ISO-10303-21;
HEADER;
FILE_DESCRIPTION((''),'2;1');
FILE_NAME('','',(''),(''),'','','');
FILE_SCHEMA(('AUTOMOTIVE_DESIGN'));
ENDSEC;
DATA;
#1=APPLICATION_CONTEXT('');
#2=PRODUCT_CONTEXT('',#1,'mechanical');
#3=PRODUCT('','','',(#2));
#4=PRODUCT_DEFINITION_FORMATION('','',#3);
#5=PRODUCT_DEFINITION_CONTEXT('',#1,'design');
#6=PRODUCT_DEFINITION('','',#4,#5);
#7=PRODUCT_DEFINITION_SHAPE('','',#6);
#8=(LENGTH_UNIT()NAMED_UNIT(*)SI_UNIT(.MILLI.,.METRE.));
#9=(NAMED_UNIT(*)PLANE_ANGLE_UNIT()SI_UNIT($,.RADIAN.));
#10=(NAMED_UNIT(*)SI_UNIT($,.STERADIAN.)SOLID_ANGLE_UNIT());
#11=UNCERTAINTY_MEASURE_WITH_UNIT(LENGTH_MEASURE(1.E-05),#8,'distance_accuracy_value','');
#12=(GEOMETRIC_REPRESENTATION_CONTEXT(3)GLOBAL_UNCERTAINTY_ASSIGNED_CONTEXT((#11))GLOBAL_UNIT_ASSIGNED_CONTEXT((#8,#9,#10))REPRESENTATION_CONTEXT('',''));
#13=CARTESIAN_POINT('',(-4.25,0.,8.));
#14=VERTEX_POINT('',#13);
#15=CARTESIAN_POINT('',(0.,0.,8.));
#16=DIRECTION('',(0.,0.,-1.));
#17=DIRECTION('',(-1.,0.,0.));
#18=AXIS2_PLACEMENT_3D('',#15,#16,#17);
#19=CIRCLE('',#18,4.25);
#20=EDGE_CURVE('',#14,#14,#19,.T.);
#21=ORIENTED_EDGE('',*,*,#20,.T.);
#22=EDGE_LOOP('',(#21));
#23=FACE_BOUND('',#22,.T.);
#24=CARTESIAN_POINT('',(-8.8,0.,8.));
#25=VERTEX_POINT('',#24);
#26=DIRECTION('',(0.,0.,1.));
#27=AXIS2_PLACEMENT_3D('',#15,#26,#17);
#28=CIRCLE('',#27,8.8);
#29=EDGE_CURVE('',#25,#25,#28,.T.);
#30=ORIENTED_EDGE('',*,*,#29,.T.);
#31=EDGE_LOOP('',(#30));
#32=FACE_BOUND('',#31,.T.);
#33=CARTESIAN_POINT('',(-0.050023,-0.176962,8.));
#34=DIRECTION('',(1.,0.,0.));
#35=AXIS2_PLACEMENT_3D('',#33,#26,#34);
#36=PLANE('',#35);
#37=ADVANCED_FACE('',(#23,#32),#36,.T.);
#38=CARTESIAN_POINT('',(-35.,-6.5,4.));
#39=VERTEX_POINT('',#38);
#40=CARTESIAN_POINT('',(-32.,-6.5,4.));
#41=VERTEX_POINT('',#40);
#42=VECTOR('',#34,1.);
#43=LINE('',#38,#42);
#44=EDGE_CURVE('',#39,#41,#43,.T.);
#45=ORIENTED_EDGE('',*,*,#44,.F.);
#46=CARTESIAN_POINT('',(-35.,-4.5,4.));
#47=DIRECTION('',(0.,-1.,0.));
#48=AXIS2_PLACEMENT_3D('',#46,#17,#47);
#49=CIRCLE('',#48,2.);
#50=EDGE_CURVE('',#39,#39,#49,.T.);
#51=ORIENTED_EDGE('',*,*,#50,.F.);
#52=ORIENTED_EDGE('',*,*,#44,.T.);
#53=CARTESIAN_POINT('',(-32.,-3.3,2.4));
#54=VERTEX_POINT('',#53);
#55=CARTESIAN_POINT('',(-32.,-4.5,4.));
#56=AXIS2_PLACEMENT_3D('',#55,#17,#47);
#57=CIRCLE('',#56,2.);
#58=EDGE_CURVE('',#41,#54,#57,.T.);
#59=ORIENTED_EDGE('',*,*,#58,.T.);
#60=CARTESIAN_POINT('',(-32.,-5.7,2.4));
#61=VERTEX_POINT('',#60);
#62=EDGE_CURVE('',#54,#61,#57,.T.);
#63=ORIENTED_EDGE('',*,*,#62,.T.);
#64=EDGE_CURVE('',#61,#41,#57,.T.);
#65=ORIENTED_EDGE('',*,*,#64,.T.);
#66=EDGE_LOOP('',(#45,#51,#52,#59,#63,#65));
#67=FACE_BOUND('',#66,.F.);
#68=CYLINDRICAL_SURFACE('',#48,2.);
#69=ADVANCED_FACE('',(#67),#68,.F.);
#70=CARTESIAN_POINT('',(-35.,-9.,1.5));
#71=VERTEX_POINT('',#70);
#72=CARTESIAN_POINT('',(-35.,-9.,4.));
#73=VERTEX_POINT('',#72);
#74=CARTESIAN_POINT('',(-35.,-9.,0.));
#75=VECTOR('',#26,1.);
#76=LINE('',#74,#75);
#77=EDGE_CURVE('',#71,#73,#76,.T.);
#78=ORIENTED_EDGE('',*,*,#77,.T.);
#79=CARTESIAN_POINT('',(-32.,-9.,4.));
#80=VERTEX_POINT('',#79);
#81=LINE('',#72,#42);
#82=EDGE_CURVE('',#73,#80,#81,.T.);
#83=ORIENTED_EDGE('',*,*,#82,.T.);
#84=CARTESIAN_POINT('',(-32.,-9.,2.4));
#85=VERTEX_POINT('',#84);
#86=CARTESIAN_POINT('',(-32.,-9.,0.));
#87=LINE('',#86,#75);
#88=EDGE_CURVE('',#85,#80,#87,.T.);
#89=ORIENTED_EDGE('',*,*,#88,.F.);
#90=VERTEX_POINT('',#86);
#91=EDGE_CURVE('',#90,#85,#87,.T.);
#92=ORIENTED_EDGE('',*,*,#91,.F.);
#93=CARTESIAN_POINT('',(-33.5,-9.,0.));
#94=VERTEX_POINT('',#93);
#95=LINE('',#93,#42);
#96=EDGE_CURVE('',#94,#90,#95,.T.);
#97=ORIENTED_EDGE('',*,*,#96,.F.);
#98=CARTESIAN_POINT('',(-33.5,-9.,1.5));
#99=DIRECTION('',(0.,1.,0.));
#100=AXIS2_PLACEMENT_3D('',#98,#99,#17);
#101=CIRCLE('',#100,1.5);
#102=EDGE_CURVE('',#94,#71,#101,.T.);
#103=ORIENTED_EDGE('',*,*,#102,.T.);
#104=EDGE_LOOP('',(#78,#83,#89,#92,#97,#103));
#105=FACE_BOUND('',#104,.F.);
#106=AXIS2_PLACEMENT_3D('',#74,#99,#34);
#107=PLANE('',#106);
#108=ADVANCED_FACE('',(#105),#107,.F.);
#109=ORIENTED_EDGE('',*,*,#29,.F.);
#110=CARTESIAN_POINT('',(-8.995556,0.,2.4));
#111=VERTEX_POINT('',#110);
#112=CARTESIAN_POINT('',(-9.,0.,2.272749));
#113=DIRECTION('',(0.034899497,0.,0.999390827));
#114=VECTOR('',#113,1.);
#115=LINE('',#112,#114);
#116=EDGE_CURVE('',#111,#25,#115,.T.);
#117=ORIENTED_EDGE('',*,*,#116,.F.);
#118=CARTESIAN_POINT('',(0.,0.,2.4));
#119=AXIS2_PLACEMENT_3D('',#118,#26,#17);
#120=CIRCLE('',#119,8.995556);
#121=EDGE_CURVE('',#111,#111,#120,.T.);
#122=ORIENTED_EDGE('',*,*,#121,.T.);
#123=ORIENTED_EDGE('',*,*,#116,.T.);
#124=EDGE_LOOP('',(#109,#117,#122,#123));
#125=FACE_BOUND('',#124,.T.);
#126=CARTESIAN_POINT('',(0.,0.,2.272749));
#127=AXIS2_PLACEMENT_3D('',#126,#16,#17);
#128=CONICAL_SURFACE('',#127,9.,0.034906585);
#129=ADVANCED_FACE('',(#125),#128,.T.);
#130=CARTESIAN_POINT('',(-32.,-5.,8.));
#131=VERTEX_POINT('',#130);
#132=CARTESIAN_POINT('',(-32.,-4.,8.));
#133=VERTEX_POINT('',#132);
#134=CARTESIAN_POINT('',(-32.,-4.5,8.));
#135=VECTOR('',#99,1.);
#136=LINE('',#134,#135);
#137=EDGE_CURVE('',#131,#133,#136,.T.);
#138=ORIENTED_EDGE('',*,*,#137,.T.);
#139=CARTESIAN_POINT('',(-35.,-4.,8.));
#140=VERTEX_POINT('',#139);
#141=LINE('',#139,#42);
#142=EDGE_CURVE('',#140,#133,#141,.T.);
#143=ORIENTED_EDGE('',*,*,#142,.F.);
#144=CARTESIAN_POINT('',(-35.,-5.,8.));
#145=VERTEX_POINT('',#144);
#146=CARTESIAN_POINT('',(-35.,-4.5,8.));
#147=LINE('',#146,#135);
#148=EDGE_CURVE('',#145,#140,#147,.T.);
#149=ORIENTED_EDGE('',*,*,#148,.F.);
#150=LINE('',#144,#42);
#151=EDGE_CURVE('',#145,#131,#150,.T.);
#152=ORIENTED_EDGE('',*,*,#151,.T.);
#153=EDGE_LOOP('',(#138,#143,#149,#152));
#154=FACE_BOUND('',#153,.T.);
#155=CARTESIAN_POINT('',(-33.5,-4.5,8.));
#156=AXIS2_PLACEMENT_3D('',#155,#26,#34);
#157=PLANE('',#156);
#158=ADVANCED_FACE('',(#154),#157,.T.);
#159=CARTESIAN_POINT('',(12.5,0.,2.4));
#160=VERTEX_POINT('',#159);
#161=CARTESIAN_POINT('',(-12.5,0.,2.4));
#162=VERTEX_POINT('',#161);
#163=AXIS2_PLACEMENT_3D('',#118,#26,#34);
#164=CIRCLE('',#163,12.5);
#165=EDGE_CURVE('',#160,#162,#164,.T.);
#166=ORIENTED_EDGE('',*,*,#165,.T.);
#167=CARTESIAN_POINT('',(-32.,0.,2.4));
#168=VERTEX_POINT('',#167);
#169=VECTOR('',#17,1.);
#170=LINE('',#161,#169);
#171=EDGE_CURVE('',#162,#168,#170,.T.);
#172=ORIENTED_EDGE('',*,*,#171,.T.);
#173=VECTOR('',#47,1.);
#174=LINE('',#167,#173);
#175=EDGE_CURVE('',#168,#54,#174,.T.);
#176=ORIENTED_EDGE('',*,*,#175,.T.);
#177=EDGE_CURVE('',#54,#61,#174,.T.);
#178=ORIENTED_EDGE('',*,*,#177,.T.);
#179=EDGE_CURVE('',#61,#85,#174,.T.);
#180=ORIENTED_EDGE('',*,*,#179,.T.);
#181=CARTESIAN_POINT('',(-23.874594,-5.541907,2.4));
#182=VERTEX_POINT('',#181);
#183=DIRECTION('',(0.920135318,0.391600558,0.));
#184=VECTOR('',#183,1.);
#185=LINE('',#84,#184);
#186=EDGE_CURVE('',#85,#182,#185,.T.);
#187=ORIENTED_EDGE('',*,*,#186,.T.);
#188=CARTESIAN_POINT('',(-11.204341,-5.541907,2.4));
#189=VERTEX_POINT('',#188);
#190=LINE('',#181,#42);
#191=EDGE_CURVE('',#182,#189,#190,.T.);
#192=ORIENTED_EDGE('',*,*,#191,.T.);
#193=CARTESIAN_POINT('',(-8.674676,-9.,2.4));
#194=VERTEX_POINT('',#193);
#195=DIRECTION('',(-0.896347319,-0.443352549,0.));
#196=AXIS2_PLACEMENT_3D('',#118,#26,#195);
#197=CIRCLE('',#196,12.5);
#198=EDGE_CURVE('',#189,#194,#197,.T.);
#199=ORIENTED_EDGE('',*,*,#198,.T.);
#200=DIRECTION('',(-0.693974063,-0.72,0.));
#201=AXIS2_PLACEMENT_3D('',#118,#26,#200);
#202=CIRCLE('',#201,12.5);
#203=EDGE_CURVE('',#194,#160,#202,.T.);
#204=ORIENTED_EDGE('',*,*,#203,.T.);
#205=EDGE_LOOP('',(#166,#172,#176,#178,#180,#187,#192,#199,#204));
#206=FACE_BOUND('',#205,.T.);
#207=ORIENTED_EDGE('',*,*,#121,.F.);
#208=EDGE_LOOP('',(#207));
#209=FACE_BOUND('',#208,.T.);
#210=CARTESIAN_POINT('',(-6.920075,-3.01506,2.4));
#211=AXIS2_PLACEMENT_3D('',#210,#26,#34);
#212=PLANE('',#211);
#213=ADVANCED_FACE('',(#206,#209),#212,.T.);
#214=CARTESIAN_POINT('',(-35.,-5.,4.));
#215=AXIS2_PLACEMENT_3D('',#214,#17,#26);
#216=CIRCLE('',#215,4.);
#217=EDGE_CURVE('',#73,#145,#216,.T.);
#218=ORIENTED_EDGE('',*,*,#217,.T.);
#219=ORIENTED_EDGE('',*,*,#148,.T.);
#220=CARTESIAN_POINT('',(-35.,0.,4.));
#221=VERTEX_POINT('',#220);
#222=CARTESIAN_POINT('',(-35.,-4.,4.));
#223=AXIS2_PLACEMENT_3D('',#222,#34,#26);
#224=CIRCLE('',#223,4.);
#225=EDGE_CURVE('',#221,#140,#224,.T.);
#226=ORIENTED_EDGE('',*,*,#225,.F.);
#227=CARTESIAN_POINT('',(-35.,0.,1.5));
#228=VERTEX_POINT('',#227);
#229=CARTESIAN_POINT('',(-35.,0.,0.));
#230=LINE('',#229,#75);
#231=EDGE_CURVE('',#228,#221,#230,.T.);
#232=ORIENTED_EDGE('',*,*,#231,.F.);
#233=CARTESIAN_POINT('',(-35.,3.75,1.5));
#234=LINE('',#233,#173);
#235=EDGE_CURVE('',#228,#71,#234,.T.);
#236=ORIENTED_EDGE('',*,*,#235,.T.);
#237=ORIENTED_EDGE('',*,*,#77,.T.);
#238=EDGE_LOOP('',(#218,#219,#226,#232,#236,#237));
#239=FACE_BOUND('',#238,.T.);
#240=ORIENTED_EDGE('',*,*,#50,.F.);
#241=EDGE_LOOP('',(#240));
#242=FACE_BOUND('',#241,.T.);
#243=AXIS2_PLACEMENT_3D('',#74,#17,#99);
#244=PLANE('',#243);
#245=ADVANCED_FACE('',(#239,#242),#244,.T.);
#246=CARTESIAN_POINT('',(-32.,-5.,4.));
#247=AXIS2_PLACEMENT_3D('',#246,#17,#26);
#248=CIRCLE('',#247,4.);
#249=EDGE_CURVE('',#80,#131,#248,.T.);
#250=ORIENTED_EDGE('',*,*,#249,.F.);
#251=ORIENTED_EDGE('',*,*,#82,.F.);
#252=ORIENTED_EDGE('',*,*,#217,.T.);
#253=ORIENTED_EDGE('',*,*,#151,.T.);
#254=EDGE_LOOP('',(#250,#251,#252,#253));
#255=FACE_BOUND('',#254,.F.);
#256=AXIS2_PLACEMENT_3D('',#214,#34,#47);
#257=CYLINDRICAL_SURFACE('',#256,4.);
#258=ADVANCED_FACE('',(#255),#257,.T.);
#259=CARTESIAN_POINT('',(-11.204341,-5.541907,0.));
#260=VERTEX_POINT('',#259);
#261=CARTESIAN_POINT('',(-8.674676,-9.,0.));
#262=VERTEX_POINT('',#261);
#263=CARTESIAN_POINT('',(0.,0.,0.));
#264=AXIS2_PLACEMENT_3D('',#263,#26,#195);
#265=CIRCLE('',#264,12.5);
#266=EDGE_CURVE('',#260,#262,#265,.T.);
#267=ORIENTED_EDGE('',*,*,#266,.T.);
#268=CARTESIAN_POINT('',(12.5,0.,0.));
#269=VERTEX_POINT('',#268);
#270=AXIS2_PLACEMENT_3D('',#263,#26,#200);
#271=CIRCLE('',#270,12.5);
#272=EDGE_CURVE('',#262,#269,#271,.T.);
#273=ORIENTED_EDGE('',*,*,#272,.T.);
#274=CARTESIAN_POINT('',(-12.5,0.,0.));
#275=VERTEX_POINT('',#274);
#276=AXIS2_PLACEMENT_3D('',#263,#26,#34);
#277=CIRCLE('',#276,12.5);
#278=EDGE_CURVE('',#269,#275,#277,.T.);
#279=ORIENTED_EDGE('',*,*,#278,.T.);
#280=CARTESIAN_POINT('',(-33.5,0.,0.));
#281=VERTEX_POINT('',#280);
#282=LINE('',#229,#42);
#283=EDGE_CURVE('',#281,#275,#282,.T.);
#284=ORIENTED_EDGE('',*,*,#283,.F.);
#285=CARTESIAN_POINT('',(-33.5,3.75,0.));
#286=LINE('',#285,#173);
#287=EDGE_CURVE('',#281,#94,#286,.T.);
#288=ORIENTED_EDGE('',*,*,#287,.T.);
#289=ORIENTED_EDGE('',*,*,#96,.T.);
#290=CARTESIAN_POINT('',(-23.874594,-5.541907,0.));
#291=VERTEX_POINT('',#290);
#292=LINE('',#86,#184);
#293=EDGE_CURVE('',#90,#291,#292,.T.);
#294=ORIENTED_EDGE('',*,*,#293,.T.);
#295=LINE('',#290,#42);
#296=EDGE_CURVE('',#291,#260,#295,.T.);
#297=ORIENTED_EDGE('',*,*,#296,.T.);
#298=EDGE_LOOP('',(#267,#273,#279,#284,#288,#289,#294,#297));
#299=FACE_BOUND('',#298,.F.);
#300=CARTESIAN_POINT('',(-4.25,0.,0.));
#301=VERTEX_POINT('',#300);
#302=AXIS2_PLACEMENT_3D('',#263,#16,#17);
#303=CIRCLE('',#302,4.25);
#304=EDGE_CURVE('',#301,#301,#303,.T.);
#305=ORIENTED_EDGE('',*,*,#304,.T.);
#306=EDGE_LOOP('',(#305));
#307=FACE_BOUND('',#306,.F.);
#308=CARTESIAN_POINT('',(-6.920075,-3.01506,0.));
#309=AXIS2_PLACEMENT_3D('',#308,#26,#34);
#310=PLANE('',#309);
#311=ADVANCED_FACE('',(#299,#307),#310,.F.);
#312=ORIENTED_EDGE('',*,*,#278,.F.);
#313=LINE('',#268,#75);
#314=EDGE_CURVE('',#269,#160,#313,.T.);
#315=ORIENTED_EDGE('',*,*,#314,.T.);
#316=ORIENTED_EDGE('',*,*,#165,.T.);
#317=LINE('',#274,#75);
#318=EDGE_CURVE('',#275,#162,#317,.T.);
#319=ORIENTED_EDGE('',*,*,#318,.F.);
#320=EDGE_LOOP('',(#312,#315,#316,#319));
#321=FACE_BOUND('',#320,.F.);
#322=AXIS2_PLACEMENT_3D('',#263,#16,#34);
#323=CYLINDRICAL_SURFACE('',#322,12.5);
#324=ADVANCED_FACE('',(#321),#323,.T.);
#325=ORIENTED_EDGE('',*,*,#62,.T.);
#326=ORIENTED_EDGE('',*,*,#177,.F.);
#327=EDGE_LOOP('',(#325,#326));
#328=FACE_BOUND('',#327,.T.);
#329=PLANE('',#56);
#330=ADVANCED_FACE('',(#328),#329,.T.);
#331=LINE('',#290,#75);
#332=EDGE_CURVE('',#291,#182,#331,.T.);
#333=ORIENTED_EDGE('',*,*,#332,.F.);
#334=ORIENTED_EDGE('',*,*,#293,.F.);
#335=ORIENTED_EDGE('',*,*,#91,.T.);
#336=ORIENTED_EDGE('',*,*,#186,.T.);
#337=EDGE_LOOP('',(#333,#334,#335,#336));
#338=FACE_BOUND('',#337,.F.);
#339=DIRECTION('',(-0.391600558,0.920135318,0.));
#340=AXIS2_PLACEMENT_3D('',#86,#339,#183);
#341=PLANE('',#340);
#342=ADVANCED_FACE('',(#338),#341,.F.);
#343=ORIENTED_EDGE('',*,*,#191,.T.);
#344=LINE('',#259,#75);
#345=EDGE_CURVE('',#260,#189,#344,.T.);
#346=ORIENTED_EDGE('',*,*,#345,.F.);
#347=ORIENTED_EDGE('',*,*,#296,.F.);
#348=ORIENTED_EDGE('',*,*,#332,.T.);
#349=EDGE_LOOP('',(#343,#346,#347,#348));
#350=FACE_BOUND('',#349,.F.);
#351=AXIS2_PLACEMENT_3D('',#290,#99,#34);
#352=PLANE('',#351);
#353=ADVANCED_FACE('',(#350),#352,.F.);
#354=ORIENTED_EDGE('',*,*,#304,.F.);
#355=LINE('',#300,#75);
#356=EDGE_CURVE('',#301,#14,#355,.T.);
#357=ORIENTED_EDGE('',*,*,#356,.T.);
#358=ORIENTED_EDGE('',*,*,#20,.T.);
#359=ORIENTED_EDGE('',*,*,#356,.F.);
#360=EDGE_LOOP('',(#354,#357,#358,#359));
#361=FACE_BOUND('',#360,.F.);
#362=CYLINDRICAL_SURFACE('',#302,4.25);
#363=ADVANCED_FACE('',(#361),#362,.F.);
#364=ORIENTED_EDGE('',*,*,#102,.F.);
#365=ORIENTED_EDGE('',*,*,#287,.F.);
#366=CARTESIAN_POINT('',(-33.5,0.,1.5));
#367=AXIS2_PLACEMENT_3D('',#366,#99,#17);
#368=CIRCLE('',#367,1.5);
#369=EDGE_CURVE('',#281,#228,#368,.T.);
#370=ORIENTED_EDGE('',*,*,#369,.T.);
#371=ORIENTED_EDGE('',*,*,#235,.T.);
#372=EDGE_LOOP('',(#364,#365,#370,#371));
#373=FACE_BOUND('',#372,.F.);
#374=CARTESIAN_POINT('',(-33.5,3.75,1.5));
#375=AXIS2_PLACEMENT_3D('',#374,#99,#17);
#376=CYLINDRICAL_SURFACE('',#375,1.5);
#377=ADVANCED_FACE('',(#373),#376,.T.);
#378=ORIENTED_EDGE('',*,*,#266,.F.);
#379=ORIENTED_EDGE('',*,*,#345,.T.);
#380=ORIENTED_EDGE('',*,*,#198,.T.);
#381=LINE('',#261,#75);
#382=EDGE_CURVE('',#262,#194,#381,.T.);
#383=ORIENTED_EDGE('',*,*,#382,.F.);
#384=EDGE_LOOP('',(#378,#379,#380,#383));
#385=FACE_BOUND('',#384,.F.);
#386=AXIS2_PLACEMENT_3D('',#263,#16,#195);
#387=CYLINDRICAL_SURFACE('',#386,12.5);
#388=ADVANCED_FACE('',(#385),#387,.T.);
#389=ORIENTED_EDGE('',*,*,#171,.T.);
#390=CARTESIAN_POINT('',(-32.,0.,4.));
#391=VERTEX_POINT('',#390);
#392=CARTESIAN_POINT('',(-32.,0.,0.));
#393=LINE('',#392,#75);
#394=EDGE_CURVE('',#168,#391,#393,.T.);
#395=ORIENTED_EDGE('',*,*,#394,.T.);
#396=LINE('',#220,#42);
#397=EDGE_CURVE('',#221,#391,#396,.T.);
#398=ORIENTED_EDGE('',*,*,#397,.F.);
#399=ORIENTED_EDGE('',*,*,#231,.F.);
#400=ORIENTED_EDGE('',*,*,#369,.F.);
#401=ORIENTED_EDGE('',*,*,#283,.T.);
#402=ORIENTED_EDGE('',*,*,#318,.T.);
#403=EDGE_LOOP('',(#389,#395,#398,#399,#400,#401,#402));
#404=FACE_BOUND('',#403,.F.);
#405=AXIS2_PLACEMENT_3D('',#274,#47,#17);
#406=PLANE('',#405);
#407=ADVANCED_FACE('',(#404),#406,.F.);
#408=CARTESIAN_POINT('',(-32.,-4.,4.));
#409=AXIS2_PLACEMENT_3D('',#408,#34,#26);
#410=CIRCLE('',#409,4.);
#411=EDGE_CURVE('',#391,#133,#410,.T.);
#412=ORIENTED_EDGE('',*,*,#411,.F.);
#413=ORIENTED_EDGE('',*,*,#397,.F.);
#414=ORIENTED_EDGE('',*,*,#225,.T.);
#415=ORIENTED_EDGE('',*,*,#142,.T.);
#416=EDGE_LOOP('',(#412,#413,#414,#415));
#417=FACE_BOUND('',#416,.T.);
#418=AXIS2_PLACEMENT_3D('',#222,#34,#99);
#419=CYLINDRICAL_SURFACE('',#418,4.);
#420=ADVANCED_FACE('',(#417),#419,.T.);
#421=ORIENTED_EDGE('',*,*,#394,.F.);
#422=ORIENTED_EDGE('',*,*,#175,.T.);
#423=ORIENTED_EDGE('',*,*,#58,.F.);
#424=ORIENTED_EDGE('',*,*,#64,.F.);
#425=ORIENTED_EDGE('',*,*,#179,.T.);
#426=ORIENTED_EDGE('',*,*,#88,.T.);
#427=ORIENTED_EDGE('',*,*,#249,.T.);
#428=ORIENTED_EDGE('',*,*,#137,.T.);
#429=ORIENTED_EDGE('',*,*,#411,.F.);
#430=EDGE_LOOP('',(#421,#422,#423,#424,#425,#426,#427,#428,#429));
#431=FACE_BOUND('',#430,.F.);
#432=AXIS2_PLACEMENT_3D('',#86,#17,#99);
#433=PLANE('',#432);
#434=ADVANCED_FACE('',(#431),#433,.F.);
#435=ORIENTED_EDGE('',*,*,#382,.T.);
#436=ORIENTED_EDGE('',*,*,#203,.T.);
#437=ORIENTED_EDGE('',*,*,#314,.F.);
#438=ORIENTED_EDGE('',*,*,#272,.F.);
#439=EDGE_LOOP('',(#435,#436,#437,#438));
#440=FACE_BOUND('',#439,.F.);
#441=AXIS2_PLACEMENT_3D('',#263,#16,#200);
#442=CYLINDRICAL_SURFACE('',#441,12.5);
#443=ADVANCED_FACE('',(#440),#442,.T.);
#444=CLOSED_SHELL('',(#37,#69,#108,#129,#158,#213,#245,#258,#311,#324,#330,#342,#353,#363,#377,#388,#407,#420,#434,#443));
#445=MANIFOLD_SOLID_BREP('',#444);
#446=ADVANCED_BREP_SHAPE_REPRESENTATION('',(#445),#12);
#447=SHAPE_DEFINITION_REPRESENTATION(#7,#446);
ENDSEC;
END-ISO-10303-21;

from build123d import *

# Parameters (mm, degrees)
F1_DEPTH    = 2.4
F0_W        = 3
F0_H        = 9
F2_DEPTH    = 8
F4_R        = 2
F5_DEPTH    = 3
F6_R        = 4
F7_T1_DEPTH = 16.5


# Not quite as in the source:
# - a fillet or chamfer that OpenCascade refuses, or shapes differently, is made with other operations: its cross-section is extruded or revolved along the edge and cut away or added


with BuildPart() as f1:
    # F0 (on Top) → F1 (new body)
    with BuildSketch(Plane.XY):
        with BuildLine():
            ThreePointArc((-9, 0), (-8.5094701622, -2.9306855101), (-7.0913516535, -5.5419068674))
            Line((-7.0913516535, -5.5419068674), (-4.1106286956, -5.5419068674))
            ThreePointArc((-4.1106286956, -5.5419068674), (-6.1633326212, -3.1021494161), (-6.9, 0))
            Line((-6.9, 0), (-9, 0))
        make_face()
        with BuildLine():
            ThreePointArc((-7.0913516535, -5.5419068674), (-3.9447964582, -8.0894116537), (0, -9))
            ThreePointArc((0, -9), (6.3639610307, -6.3639610307), (9, 0))
            ThreePointArc((9, 0), (0, 9), (-9, 0))
            Line((-9, 0), (-6.9, 0))
            ThreePointArc((-6.9, 0), (0, 6.9), (6.9, 0))
            ThreePointArc((6.9, 0), (3.1021494161, -6.1633326212), (-4.1106286956, -5.5419068674))
            Line((-4.1106286956, -5.5419068674), (-7.0913516535, -5.5419068674))
        make_face()
        with BuildLine():
            Line((-23.8745937477, -5.5419068674), (-11.2043414922, -5.5419068674))
            ThreePointArc((-11.2043414922, -5.5419068674), (-12.1717761369, -2.8456749066), (-12.5, 0))
            Line((-12.5, 0), (-32, 0))
            Line((-32, 0), (-32, -9))
            Line((-32, -9), (-23.8745937477, -5.5419068674))
        make_face()
        with BuildLine():
            ThreePointArc((9, 0), (6.3639610307, -6.3639610307), (0, -9))
            Line((0, -9), (-8.6746757864, -9))
            ThreePointArc((-8.6746757864, -9), (4.8896090165, -11.5039872942), (12.5, 0))
            ThreePointArc((12.5, 0), (0, 12.5), (-12.5, 0))
            Line((-12.5, 0), (-9, 0))
            ThreePointArc((-9, 0), (0, 9), (9, 0))
        make_face()
        with BuildLine():
            Line((-11.2043414922, -5.5419068674), (-7.0913516535, -5.5419068674))
            ThreePointArc((-7.0913516535, -5.5419068674), (-8.5094701622, -2.9306855101), (-9, 0))
            Line((-9, 0), (-12.5, 0))
            ThreePointArc((-12.5, 0), (-12.1717761369, -2.8456749066), (-11.2043414922, -5.5419068674))
        make_face()
        with BuildLine():
            Line((-8.6746757864, -9), (0, -9))
            ThreePointArc((0, -9), (-3.9447964582, -8.0894116537), (-7.0913516535, -5.5419068674))
            Line((-7.0913516535, -5.5419068674), (-11.2043414922, -5.5419068674))
            ThreePointArc((-11.2043414922, -5.5419068674), (-10.0887776276, -7.3801467452), (-8.6746757864, -9))
        make_face()
    extrude(amount=F1_DEPTH)

    # F0 (on Top) → F2 (join)
    with BuildSketch(Plane.XY):
        with BuildLine():
            ThreePointArc((-6.9, 0), (-6.1633326212, -3.1021494161), (-4.1106286956, -5.5419068674))
            ThreePointArc((-4.1106286956, -5.5419068674), (3.1021494161, -6.1633326212), (6.9, 0))
            ThreePointArc((6.9, 0), (0, 6.9), (-6.9, 0))
        make_face()
        with BuildLine():
            ThreePointArc((4.25, 0), (0, -4.25), (-4.25, 0))
            ThreePointArc((-4.25, 0), (0, 4.25), (4.25, 0))
        make_face(mode=Mode.SUBTRACT)
        with Locations((-33.5, -4.5)):
            Rectangle(F0_W, F0_H)
        with BuildLine():
            ThreePointArc((-7.0913516535, -5.5419068674), (-3.9447964582, -8.0894116537), (0, -9))
            ThreePointArc((0, -9), (6.3639610307, -6.3639610307), (9, 0))
            ThreePointArc((9, 0), (0, 9), (-9, 0))
            Line((-9, 0), (-6.9, 0))
            ThreePointArc((-6.9, 0), (0, 6.9), (6.9, 0))
            ThreePointArc((6.9, 0), (3.1021494161, -6.1633326212), (-4.1106286956, -5.5419068674))
            Line((-4.1106286956, -5.5419068674), (-7.0913516535, -5.5419068674))
        make_face()
        with BuildLine():
            ThreePointArc((-9, 0), (-8.5094701622, -2.9306855101), (-7.0913516535, -5.5419068674))
            Line((-7.0913516535, -5.5419068674), (-4.1106286956, -5.5419068674))
            ThreePointArc((-4.1106286956, -5.5419068674), (-6.1633326212, -3.1021494161), (-6.9, 0))
            Line((-6.9, 0), (-9, 0))
        make_face()
    extrude(amount=F2_DEPTH)

    # F4 (on offset) → F5 (cut, through all)
    with BuildSketch(Plane(origin=(-35, 0, 0), x_dir=(0, -1, 0), z_dir=(-1, 0, 0))):
        with Locations((4.5, 4)):
            Circle(F4_R)
    extrude(amount=-F5_DEPTH, mode=Mode.SUBTRACT)

    # F6
    f6_edges = [f1.edges().sort_by_distance(p)[0] for p in [
        (-33.5, -9, 8),
        (-33.5, 0, 8),
    ]]
    fillet(f6_edges, radius=F6_R)

    # F7: fillet of radius 1.5 on 2 edges, made by hand

    # F7_s2 → F7_t1 (cut)
    with BuildSketch(Plane.XZ.offset(-3.75)):
        with BuildLine():
            ThreePointArc((-35, 1.5), (-34.5606601718, 0.4393398282), (-33.5, 0))
            Line((-33.5, 0), (-35, 0))
            Line((-35, 0), (-35, 1.5))
        make_face()
    extrude(amount=F7_T1_DEPTH, mode=Mode.SUBTRACT)

    # F8: chamfer of 0.2 x 5.7272506566 on 1 edges, made by hand


with BuildPart() as f8_tool2:
    # F8_s3 → F8_t4 (revolve)
    with BuildSketch(Plane.XZ):
        Polygon((-9, 2.2727493434), (-8.8, 8), (-9, 8), align=None)
    revolve(axis=Axis((0, 0, 8), (0, 0, 1)))

    split(bisect_by=Plane.XY.offset(2.4), keep=Keep.TOP)


with BuildPart() as f1_1:
    add(f1.part)

    # F8_t1: cut F8_tool2
    add(f8_tool2.part, mode=Mode.SUBTRACT)


solid = f1_1.part
